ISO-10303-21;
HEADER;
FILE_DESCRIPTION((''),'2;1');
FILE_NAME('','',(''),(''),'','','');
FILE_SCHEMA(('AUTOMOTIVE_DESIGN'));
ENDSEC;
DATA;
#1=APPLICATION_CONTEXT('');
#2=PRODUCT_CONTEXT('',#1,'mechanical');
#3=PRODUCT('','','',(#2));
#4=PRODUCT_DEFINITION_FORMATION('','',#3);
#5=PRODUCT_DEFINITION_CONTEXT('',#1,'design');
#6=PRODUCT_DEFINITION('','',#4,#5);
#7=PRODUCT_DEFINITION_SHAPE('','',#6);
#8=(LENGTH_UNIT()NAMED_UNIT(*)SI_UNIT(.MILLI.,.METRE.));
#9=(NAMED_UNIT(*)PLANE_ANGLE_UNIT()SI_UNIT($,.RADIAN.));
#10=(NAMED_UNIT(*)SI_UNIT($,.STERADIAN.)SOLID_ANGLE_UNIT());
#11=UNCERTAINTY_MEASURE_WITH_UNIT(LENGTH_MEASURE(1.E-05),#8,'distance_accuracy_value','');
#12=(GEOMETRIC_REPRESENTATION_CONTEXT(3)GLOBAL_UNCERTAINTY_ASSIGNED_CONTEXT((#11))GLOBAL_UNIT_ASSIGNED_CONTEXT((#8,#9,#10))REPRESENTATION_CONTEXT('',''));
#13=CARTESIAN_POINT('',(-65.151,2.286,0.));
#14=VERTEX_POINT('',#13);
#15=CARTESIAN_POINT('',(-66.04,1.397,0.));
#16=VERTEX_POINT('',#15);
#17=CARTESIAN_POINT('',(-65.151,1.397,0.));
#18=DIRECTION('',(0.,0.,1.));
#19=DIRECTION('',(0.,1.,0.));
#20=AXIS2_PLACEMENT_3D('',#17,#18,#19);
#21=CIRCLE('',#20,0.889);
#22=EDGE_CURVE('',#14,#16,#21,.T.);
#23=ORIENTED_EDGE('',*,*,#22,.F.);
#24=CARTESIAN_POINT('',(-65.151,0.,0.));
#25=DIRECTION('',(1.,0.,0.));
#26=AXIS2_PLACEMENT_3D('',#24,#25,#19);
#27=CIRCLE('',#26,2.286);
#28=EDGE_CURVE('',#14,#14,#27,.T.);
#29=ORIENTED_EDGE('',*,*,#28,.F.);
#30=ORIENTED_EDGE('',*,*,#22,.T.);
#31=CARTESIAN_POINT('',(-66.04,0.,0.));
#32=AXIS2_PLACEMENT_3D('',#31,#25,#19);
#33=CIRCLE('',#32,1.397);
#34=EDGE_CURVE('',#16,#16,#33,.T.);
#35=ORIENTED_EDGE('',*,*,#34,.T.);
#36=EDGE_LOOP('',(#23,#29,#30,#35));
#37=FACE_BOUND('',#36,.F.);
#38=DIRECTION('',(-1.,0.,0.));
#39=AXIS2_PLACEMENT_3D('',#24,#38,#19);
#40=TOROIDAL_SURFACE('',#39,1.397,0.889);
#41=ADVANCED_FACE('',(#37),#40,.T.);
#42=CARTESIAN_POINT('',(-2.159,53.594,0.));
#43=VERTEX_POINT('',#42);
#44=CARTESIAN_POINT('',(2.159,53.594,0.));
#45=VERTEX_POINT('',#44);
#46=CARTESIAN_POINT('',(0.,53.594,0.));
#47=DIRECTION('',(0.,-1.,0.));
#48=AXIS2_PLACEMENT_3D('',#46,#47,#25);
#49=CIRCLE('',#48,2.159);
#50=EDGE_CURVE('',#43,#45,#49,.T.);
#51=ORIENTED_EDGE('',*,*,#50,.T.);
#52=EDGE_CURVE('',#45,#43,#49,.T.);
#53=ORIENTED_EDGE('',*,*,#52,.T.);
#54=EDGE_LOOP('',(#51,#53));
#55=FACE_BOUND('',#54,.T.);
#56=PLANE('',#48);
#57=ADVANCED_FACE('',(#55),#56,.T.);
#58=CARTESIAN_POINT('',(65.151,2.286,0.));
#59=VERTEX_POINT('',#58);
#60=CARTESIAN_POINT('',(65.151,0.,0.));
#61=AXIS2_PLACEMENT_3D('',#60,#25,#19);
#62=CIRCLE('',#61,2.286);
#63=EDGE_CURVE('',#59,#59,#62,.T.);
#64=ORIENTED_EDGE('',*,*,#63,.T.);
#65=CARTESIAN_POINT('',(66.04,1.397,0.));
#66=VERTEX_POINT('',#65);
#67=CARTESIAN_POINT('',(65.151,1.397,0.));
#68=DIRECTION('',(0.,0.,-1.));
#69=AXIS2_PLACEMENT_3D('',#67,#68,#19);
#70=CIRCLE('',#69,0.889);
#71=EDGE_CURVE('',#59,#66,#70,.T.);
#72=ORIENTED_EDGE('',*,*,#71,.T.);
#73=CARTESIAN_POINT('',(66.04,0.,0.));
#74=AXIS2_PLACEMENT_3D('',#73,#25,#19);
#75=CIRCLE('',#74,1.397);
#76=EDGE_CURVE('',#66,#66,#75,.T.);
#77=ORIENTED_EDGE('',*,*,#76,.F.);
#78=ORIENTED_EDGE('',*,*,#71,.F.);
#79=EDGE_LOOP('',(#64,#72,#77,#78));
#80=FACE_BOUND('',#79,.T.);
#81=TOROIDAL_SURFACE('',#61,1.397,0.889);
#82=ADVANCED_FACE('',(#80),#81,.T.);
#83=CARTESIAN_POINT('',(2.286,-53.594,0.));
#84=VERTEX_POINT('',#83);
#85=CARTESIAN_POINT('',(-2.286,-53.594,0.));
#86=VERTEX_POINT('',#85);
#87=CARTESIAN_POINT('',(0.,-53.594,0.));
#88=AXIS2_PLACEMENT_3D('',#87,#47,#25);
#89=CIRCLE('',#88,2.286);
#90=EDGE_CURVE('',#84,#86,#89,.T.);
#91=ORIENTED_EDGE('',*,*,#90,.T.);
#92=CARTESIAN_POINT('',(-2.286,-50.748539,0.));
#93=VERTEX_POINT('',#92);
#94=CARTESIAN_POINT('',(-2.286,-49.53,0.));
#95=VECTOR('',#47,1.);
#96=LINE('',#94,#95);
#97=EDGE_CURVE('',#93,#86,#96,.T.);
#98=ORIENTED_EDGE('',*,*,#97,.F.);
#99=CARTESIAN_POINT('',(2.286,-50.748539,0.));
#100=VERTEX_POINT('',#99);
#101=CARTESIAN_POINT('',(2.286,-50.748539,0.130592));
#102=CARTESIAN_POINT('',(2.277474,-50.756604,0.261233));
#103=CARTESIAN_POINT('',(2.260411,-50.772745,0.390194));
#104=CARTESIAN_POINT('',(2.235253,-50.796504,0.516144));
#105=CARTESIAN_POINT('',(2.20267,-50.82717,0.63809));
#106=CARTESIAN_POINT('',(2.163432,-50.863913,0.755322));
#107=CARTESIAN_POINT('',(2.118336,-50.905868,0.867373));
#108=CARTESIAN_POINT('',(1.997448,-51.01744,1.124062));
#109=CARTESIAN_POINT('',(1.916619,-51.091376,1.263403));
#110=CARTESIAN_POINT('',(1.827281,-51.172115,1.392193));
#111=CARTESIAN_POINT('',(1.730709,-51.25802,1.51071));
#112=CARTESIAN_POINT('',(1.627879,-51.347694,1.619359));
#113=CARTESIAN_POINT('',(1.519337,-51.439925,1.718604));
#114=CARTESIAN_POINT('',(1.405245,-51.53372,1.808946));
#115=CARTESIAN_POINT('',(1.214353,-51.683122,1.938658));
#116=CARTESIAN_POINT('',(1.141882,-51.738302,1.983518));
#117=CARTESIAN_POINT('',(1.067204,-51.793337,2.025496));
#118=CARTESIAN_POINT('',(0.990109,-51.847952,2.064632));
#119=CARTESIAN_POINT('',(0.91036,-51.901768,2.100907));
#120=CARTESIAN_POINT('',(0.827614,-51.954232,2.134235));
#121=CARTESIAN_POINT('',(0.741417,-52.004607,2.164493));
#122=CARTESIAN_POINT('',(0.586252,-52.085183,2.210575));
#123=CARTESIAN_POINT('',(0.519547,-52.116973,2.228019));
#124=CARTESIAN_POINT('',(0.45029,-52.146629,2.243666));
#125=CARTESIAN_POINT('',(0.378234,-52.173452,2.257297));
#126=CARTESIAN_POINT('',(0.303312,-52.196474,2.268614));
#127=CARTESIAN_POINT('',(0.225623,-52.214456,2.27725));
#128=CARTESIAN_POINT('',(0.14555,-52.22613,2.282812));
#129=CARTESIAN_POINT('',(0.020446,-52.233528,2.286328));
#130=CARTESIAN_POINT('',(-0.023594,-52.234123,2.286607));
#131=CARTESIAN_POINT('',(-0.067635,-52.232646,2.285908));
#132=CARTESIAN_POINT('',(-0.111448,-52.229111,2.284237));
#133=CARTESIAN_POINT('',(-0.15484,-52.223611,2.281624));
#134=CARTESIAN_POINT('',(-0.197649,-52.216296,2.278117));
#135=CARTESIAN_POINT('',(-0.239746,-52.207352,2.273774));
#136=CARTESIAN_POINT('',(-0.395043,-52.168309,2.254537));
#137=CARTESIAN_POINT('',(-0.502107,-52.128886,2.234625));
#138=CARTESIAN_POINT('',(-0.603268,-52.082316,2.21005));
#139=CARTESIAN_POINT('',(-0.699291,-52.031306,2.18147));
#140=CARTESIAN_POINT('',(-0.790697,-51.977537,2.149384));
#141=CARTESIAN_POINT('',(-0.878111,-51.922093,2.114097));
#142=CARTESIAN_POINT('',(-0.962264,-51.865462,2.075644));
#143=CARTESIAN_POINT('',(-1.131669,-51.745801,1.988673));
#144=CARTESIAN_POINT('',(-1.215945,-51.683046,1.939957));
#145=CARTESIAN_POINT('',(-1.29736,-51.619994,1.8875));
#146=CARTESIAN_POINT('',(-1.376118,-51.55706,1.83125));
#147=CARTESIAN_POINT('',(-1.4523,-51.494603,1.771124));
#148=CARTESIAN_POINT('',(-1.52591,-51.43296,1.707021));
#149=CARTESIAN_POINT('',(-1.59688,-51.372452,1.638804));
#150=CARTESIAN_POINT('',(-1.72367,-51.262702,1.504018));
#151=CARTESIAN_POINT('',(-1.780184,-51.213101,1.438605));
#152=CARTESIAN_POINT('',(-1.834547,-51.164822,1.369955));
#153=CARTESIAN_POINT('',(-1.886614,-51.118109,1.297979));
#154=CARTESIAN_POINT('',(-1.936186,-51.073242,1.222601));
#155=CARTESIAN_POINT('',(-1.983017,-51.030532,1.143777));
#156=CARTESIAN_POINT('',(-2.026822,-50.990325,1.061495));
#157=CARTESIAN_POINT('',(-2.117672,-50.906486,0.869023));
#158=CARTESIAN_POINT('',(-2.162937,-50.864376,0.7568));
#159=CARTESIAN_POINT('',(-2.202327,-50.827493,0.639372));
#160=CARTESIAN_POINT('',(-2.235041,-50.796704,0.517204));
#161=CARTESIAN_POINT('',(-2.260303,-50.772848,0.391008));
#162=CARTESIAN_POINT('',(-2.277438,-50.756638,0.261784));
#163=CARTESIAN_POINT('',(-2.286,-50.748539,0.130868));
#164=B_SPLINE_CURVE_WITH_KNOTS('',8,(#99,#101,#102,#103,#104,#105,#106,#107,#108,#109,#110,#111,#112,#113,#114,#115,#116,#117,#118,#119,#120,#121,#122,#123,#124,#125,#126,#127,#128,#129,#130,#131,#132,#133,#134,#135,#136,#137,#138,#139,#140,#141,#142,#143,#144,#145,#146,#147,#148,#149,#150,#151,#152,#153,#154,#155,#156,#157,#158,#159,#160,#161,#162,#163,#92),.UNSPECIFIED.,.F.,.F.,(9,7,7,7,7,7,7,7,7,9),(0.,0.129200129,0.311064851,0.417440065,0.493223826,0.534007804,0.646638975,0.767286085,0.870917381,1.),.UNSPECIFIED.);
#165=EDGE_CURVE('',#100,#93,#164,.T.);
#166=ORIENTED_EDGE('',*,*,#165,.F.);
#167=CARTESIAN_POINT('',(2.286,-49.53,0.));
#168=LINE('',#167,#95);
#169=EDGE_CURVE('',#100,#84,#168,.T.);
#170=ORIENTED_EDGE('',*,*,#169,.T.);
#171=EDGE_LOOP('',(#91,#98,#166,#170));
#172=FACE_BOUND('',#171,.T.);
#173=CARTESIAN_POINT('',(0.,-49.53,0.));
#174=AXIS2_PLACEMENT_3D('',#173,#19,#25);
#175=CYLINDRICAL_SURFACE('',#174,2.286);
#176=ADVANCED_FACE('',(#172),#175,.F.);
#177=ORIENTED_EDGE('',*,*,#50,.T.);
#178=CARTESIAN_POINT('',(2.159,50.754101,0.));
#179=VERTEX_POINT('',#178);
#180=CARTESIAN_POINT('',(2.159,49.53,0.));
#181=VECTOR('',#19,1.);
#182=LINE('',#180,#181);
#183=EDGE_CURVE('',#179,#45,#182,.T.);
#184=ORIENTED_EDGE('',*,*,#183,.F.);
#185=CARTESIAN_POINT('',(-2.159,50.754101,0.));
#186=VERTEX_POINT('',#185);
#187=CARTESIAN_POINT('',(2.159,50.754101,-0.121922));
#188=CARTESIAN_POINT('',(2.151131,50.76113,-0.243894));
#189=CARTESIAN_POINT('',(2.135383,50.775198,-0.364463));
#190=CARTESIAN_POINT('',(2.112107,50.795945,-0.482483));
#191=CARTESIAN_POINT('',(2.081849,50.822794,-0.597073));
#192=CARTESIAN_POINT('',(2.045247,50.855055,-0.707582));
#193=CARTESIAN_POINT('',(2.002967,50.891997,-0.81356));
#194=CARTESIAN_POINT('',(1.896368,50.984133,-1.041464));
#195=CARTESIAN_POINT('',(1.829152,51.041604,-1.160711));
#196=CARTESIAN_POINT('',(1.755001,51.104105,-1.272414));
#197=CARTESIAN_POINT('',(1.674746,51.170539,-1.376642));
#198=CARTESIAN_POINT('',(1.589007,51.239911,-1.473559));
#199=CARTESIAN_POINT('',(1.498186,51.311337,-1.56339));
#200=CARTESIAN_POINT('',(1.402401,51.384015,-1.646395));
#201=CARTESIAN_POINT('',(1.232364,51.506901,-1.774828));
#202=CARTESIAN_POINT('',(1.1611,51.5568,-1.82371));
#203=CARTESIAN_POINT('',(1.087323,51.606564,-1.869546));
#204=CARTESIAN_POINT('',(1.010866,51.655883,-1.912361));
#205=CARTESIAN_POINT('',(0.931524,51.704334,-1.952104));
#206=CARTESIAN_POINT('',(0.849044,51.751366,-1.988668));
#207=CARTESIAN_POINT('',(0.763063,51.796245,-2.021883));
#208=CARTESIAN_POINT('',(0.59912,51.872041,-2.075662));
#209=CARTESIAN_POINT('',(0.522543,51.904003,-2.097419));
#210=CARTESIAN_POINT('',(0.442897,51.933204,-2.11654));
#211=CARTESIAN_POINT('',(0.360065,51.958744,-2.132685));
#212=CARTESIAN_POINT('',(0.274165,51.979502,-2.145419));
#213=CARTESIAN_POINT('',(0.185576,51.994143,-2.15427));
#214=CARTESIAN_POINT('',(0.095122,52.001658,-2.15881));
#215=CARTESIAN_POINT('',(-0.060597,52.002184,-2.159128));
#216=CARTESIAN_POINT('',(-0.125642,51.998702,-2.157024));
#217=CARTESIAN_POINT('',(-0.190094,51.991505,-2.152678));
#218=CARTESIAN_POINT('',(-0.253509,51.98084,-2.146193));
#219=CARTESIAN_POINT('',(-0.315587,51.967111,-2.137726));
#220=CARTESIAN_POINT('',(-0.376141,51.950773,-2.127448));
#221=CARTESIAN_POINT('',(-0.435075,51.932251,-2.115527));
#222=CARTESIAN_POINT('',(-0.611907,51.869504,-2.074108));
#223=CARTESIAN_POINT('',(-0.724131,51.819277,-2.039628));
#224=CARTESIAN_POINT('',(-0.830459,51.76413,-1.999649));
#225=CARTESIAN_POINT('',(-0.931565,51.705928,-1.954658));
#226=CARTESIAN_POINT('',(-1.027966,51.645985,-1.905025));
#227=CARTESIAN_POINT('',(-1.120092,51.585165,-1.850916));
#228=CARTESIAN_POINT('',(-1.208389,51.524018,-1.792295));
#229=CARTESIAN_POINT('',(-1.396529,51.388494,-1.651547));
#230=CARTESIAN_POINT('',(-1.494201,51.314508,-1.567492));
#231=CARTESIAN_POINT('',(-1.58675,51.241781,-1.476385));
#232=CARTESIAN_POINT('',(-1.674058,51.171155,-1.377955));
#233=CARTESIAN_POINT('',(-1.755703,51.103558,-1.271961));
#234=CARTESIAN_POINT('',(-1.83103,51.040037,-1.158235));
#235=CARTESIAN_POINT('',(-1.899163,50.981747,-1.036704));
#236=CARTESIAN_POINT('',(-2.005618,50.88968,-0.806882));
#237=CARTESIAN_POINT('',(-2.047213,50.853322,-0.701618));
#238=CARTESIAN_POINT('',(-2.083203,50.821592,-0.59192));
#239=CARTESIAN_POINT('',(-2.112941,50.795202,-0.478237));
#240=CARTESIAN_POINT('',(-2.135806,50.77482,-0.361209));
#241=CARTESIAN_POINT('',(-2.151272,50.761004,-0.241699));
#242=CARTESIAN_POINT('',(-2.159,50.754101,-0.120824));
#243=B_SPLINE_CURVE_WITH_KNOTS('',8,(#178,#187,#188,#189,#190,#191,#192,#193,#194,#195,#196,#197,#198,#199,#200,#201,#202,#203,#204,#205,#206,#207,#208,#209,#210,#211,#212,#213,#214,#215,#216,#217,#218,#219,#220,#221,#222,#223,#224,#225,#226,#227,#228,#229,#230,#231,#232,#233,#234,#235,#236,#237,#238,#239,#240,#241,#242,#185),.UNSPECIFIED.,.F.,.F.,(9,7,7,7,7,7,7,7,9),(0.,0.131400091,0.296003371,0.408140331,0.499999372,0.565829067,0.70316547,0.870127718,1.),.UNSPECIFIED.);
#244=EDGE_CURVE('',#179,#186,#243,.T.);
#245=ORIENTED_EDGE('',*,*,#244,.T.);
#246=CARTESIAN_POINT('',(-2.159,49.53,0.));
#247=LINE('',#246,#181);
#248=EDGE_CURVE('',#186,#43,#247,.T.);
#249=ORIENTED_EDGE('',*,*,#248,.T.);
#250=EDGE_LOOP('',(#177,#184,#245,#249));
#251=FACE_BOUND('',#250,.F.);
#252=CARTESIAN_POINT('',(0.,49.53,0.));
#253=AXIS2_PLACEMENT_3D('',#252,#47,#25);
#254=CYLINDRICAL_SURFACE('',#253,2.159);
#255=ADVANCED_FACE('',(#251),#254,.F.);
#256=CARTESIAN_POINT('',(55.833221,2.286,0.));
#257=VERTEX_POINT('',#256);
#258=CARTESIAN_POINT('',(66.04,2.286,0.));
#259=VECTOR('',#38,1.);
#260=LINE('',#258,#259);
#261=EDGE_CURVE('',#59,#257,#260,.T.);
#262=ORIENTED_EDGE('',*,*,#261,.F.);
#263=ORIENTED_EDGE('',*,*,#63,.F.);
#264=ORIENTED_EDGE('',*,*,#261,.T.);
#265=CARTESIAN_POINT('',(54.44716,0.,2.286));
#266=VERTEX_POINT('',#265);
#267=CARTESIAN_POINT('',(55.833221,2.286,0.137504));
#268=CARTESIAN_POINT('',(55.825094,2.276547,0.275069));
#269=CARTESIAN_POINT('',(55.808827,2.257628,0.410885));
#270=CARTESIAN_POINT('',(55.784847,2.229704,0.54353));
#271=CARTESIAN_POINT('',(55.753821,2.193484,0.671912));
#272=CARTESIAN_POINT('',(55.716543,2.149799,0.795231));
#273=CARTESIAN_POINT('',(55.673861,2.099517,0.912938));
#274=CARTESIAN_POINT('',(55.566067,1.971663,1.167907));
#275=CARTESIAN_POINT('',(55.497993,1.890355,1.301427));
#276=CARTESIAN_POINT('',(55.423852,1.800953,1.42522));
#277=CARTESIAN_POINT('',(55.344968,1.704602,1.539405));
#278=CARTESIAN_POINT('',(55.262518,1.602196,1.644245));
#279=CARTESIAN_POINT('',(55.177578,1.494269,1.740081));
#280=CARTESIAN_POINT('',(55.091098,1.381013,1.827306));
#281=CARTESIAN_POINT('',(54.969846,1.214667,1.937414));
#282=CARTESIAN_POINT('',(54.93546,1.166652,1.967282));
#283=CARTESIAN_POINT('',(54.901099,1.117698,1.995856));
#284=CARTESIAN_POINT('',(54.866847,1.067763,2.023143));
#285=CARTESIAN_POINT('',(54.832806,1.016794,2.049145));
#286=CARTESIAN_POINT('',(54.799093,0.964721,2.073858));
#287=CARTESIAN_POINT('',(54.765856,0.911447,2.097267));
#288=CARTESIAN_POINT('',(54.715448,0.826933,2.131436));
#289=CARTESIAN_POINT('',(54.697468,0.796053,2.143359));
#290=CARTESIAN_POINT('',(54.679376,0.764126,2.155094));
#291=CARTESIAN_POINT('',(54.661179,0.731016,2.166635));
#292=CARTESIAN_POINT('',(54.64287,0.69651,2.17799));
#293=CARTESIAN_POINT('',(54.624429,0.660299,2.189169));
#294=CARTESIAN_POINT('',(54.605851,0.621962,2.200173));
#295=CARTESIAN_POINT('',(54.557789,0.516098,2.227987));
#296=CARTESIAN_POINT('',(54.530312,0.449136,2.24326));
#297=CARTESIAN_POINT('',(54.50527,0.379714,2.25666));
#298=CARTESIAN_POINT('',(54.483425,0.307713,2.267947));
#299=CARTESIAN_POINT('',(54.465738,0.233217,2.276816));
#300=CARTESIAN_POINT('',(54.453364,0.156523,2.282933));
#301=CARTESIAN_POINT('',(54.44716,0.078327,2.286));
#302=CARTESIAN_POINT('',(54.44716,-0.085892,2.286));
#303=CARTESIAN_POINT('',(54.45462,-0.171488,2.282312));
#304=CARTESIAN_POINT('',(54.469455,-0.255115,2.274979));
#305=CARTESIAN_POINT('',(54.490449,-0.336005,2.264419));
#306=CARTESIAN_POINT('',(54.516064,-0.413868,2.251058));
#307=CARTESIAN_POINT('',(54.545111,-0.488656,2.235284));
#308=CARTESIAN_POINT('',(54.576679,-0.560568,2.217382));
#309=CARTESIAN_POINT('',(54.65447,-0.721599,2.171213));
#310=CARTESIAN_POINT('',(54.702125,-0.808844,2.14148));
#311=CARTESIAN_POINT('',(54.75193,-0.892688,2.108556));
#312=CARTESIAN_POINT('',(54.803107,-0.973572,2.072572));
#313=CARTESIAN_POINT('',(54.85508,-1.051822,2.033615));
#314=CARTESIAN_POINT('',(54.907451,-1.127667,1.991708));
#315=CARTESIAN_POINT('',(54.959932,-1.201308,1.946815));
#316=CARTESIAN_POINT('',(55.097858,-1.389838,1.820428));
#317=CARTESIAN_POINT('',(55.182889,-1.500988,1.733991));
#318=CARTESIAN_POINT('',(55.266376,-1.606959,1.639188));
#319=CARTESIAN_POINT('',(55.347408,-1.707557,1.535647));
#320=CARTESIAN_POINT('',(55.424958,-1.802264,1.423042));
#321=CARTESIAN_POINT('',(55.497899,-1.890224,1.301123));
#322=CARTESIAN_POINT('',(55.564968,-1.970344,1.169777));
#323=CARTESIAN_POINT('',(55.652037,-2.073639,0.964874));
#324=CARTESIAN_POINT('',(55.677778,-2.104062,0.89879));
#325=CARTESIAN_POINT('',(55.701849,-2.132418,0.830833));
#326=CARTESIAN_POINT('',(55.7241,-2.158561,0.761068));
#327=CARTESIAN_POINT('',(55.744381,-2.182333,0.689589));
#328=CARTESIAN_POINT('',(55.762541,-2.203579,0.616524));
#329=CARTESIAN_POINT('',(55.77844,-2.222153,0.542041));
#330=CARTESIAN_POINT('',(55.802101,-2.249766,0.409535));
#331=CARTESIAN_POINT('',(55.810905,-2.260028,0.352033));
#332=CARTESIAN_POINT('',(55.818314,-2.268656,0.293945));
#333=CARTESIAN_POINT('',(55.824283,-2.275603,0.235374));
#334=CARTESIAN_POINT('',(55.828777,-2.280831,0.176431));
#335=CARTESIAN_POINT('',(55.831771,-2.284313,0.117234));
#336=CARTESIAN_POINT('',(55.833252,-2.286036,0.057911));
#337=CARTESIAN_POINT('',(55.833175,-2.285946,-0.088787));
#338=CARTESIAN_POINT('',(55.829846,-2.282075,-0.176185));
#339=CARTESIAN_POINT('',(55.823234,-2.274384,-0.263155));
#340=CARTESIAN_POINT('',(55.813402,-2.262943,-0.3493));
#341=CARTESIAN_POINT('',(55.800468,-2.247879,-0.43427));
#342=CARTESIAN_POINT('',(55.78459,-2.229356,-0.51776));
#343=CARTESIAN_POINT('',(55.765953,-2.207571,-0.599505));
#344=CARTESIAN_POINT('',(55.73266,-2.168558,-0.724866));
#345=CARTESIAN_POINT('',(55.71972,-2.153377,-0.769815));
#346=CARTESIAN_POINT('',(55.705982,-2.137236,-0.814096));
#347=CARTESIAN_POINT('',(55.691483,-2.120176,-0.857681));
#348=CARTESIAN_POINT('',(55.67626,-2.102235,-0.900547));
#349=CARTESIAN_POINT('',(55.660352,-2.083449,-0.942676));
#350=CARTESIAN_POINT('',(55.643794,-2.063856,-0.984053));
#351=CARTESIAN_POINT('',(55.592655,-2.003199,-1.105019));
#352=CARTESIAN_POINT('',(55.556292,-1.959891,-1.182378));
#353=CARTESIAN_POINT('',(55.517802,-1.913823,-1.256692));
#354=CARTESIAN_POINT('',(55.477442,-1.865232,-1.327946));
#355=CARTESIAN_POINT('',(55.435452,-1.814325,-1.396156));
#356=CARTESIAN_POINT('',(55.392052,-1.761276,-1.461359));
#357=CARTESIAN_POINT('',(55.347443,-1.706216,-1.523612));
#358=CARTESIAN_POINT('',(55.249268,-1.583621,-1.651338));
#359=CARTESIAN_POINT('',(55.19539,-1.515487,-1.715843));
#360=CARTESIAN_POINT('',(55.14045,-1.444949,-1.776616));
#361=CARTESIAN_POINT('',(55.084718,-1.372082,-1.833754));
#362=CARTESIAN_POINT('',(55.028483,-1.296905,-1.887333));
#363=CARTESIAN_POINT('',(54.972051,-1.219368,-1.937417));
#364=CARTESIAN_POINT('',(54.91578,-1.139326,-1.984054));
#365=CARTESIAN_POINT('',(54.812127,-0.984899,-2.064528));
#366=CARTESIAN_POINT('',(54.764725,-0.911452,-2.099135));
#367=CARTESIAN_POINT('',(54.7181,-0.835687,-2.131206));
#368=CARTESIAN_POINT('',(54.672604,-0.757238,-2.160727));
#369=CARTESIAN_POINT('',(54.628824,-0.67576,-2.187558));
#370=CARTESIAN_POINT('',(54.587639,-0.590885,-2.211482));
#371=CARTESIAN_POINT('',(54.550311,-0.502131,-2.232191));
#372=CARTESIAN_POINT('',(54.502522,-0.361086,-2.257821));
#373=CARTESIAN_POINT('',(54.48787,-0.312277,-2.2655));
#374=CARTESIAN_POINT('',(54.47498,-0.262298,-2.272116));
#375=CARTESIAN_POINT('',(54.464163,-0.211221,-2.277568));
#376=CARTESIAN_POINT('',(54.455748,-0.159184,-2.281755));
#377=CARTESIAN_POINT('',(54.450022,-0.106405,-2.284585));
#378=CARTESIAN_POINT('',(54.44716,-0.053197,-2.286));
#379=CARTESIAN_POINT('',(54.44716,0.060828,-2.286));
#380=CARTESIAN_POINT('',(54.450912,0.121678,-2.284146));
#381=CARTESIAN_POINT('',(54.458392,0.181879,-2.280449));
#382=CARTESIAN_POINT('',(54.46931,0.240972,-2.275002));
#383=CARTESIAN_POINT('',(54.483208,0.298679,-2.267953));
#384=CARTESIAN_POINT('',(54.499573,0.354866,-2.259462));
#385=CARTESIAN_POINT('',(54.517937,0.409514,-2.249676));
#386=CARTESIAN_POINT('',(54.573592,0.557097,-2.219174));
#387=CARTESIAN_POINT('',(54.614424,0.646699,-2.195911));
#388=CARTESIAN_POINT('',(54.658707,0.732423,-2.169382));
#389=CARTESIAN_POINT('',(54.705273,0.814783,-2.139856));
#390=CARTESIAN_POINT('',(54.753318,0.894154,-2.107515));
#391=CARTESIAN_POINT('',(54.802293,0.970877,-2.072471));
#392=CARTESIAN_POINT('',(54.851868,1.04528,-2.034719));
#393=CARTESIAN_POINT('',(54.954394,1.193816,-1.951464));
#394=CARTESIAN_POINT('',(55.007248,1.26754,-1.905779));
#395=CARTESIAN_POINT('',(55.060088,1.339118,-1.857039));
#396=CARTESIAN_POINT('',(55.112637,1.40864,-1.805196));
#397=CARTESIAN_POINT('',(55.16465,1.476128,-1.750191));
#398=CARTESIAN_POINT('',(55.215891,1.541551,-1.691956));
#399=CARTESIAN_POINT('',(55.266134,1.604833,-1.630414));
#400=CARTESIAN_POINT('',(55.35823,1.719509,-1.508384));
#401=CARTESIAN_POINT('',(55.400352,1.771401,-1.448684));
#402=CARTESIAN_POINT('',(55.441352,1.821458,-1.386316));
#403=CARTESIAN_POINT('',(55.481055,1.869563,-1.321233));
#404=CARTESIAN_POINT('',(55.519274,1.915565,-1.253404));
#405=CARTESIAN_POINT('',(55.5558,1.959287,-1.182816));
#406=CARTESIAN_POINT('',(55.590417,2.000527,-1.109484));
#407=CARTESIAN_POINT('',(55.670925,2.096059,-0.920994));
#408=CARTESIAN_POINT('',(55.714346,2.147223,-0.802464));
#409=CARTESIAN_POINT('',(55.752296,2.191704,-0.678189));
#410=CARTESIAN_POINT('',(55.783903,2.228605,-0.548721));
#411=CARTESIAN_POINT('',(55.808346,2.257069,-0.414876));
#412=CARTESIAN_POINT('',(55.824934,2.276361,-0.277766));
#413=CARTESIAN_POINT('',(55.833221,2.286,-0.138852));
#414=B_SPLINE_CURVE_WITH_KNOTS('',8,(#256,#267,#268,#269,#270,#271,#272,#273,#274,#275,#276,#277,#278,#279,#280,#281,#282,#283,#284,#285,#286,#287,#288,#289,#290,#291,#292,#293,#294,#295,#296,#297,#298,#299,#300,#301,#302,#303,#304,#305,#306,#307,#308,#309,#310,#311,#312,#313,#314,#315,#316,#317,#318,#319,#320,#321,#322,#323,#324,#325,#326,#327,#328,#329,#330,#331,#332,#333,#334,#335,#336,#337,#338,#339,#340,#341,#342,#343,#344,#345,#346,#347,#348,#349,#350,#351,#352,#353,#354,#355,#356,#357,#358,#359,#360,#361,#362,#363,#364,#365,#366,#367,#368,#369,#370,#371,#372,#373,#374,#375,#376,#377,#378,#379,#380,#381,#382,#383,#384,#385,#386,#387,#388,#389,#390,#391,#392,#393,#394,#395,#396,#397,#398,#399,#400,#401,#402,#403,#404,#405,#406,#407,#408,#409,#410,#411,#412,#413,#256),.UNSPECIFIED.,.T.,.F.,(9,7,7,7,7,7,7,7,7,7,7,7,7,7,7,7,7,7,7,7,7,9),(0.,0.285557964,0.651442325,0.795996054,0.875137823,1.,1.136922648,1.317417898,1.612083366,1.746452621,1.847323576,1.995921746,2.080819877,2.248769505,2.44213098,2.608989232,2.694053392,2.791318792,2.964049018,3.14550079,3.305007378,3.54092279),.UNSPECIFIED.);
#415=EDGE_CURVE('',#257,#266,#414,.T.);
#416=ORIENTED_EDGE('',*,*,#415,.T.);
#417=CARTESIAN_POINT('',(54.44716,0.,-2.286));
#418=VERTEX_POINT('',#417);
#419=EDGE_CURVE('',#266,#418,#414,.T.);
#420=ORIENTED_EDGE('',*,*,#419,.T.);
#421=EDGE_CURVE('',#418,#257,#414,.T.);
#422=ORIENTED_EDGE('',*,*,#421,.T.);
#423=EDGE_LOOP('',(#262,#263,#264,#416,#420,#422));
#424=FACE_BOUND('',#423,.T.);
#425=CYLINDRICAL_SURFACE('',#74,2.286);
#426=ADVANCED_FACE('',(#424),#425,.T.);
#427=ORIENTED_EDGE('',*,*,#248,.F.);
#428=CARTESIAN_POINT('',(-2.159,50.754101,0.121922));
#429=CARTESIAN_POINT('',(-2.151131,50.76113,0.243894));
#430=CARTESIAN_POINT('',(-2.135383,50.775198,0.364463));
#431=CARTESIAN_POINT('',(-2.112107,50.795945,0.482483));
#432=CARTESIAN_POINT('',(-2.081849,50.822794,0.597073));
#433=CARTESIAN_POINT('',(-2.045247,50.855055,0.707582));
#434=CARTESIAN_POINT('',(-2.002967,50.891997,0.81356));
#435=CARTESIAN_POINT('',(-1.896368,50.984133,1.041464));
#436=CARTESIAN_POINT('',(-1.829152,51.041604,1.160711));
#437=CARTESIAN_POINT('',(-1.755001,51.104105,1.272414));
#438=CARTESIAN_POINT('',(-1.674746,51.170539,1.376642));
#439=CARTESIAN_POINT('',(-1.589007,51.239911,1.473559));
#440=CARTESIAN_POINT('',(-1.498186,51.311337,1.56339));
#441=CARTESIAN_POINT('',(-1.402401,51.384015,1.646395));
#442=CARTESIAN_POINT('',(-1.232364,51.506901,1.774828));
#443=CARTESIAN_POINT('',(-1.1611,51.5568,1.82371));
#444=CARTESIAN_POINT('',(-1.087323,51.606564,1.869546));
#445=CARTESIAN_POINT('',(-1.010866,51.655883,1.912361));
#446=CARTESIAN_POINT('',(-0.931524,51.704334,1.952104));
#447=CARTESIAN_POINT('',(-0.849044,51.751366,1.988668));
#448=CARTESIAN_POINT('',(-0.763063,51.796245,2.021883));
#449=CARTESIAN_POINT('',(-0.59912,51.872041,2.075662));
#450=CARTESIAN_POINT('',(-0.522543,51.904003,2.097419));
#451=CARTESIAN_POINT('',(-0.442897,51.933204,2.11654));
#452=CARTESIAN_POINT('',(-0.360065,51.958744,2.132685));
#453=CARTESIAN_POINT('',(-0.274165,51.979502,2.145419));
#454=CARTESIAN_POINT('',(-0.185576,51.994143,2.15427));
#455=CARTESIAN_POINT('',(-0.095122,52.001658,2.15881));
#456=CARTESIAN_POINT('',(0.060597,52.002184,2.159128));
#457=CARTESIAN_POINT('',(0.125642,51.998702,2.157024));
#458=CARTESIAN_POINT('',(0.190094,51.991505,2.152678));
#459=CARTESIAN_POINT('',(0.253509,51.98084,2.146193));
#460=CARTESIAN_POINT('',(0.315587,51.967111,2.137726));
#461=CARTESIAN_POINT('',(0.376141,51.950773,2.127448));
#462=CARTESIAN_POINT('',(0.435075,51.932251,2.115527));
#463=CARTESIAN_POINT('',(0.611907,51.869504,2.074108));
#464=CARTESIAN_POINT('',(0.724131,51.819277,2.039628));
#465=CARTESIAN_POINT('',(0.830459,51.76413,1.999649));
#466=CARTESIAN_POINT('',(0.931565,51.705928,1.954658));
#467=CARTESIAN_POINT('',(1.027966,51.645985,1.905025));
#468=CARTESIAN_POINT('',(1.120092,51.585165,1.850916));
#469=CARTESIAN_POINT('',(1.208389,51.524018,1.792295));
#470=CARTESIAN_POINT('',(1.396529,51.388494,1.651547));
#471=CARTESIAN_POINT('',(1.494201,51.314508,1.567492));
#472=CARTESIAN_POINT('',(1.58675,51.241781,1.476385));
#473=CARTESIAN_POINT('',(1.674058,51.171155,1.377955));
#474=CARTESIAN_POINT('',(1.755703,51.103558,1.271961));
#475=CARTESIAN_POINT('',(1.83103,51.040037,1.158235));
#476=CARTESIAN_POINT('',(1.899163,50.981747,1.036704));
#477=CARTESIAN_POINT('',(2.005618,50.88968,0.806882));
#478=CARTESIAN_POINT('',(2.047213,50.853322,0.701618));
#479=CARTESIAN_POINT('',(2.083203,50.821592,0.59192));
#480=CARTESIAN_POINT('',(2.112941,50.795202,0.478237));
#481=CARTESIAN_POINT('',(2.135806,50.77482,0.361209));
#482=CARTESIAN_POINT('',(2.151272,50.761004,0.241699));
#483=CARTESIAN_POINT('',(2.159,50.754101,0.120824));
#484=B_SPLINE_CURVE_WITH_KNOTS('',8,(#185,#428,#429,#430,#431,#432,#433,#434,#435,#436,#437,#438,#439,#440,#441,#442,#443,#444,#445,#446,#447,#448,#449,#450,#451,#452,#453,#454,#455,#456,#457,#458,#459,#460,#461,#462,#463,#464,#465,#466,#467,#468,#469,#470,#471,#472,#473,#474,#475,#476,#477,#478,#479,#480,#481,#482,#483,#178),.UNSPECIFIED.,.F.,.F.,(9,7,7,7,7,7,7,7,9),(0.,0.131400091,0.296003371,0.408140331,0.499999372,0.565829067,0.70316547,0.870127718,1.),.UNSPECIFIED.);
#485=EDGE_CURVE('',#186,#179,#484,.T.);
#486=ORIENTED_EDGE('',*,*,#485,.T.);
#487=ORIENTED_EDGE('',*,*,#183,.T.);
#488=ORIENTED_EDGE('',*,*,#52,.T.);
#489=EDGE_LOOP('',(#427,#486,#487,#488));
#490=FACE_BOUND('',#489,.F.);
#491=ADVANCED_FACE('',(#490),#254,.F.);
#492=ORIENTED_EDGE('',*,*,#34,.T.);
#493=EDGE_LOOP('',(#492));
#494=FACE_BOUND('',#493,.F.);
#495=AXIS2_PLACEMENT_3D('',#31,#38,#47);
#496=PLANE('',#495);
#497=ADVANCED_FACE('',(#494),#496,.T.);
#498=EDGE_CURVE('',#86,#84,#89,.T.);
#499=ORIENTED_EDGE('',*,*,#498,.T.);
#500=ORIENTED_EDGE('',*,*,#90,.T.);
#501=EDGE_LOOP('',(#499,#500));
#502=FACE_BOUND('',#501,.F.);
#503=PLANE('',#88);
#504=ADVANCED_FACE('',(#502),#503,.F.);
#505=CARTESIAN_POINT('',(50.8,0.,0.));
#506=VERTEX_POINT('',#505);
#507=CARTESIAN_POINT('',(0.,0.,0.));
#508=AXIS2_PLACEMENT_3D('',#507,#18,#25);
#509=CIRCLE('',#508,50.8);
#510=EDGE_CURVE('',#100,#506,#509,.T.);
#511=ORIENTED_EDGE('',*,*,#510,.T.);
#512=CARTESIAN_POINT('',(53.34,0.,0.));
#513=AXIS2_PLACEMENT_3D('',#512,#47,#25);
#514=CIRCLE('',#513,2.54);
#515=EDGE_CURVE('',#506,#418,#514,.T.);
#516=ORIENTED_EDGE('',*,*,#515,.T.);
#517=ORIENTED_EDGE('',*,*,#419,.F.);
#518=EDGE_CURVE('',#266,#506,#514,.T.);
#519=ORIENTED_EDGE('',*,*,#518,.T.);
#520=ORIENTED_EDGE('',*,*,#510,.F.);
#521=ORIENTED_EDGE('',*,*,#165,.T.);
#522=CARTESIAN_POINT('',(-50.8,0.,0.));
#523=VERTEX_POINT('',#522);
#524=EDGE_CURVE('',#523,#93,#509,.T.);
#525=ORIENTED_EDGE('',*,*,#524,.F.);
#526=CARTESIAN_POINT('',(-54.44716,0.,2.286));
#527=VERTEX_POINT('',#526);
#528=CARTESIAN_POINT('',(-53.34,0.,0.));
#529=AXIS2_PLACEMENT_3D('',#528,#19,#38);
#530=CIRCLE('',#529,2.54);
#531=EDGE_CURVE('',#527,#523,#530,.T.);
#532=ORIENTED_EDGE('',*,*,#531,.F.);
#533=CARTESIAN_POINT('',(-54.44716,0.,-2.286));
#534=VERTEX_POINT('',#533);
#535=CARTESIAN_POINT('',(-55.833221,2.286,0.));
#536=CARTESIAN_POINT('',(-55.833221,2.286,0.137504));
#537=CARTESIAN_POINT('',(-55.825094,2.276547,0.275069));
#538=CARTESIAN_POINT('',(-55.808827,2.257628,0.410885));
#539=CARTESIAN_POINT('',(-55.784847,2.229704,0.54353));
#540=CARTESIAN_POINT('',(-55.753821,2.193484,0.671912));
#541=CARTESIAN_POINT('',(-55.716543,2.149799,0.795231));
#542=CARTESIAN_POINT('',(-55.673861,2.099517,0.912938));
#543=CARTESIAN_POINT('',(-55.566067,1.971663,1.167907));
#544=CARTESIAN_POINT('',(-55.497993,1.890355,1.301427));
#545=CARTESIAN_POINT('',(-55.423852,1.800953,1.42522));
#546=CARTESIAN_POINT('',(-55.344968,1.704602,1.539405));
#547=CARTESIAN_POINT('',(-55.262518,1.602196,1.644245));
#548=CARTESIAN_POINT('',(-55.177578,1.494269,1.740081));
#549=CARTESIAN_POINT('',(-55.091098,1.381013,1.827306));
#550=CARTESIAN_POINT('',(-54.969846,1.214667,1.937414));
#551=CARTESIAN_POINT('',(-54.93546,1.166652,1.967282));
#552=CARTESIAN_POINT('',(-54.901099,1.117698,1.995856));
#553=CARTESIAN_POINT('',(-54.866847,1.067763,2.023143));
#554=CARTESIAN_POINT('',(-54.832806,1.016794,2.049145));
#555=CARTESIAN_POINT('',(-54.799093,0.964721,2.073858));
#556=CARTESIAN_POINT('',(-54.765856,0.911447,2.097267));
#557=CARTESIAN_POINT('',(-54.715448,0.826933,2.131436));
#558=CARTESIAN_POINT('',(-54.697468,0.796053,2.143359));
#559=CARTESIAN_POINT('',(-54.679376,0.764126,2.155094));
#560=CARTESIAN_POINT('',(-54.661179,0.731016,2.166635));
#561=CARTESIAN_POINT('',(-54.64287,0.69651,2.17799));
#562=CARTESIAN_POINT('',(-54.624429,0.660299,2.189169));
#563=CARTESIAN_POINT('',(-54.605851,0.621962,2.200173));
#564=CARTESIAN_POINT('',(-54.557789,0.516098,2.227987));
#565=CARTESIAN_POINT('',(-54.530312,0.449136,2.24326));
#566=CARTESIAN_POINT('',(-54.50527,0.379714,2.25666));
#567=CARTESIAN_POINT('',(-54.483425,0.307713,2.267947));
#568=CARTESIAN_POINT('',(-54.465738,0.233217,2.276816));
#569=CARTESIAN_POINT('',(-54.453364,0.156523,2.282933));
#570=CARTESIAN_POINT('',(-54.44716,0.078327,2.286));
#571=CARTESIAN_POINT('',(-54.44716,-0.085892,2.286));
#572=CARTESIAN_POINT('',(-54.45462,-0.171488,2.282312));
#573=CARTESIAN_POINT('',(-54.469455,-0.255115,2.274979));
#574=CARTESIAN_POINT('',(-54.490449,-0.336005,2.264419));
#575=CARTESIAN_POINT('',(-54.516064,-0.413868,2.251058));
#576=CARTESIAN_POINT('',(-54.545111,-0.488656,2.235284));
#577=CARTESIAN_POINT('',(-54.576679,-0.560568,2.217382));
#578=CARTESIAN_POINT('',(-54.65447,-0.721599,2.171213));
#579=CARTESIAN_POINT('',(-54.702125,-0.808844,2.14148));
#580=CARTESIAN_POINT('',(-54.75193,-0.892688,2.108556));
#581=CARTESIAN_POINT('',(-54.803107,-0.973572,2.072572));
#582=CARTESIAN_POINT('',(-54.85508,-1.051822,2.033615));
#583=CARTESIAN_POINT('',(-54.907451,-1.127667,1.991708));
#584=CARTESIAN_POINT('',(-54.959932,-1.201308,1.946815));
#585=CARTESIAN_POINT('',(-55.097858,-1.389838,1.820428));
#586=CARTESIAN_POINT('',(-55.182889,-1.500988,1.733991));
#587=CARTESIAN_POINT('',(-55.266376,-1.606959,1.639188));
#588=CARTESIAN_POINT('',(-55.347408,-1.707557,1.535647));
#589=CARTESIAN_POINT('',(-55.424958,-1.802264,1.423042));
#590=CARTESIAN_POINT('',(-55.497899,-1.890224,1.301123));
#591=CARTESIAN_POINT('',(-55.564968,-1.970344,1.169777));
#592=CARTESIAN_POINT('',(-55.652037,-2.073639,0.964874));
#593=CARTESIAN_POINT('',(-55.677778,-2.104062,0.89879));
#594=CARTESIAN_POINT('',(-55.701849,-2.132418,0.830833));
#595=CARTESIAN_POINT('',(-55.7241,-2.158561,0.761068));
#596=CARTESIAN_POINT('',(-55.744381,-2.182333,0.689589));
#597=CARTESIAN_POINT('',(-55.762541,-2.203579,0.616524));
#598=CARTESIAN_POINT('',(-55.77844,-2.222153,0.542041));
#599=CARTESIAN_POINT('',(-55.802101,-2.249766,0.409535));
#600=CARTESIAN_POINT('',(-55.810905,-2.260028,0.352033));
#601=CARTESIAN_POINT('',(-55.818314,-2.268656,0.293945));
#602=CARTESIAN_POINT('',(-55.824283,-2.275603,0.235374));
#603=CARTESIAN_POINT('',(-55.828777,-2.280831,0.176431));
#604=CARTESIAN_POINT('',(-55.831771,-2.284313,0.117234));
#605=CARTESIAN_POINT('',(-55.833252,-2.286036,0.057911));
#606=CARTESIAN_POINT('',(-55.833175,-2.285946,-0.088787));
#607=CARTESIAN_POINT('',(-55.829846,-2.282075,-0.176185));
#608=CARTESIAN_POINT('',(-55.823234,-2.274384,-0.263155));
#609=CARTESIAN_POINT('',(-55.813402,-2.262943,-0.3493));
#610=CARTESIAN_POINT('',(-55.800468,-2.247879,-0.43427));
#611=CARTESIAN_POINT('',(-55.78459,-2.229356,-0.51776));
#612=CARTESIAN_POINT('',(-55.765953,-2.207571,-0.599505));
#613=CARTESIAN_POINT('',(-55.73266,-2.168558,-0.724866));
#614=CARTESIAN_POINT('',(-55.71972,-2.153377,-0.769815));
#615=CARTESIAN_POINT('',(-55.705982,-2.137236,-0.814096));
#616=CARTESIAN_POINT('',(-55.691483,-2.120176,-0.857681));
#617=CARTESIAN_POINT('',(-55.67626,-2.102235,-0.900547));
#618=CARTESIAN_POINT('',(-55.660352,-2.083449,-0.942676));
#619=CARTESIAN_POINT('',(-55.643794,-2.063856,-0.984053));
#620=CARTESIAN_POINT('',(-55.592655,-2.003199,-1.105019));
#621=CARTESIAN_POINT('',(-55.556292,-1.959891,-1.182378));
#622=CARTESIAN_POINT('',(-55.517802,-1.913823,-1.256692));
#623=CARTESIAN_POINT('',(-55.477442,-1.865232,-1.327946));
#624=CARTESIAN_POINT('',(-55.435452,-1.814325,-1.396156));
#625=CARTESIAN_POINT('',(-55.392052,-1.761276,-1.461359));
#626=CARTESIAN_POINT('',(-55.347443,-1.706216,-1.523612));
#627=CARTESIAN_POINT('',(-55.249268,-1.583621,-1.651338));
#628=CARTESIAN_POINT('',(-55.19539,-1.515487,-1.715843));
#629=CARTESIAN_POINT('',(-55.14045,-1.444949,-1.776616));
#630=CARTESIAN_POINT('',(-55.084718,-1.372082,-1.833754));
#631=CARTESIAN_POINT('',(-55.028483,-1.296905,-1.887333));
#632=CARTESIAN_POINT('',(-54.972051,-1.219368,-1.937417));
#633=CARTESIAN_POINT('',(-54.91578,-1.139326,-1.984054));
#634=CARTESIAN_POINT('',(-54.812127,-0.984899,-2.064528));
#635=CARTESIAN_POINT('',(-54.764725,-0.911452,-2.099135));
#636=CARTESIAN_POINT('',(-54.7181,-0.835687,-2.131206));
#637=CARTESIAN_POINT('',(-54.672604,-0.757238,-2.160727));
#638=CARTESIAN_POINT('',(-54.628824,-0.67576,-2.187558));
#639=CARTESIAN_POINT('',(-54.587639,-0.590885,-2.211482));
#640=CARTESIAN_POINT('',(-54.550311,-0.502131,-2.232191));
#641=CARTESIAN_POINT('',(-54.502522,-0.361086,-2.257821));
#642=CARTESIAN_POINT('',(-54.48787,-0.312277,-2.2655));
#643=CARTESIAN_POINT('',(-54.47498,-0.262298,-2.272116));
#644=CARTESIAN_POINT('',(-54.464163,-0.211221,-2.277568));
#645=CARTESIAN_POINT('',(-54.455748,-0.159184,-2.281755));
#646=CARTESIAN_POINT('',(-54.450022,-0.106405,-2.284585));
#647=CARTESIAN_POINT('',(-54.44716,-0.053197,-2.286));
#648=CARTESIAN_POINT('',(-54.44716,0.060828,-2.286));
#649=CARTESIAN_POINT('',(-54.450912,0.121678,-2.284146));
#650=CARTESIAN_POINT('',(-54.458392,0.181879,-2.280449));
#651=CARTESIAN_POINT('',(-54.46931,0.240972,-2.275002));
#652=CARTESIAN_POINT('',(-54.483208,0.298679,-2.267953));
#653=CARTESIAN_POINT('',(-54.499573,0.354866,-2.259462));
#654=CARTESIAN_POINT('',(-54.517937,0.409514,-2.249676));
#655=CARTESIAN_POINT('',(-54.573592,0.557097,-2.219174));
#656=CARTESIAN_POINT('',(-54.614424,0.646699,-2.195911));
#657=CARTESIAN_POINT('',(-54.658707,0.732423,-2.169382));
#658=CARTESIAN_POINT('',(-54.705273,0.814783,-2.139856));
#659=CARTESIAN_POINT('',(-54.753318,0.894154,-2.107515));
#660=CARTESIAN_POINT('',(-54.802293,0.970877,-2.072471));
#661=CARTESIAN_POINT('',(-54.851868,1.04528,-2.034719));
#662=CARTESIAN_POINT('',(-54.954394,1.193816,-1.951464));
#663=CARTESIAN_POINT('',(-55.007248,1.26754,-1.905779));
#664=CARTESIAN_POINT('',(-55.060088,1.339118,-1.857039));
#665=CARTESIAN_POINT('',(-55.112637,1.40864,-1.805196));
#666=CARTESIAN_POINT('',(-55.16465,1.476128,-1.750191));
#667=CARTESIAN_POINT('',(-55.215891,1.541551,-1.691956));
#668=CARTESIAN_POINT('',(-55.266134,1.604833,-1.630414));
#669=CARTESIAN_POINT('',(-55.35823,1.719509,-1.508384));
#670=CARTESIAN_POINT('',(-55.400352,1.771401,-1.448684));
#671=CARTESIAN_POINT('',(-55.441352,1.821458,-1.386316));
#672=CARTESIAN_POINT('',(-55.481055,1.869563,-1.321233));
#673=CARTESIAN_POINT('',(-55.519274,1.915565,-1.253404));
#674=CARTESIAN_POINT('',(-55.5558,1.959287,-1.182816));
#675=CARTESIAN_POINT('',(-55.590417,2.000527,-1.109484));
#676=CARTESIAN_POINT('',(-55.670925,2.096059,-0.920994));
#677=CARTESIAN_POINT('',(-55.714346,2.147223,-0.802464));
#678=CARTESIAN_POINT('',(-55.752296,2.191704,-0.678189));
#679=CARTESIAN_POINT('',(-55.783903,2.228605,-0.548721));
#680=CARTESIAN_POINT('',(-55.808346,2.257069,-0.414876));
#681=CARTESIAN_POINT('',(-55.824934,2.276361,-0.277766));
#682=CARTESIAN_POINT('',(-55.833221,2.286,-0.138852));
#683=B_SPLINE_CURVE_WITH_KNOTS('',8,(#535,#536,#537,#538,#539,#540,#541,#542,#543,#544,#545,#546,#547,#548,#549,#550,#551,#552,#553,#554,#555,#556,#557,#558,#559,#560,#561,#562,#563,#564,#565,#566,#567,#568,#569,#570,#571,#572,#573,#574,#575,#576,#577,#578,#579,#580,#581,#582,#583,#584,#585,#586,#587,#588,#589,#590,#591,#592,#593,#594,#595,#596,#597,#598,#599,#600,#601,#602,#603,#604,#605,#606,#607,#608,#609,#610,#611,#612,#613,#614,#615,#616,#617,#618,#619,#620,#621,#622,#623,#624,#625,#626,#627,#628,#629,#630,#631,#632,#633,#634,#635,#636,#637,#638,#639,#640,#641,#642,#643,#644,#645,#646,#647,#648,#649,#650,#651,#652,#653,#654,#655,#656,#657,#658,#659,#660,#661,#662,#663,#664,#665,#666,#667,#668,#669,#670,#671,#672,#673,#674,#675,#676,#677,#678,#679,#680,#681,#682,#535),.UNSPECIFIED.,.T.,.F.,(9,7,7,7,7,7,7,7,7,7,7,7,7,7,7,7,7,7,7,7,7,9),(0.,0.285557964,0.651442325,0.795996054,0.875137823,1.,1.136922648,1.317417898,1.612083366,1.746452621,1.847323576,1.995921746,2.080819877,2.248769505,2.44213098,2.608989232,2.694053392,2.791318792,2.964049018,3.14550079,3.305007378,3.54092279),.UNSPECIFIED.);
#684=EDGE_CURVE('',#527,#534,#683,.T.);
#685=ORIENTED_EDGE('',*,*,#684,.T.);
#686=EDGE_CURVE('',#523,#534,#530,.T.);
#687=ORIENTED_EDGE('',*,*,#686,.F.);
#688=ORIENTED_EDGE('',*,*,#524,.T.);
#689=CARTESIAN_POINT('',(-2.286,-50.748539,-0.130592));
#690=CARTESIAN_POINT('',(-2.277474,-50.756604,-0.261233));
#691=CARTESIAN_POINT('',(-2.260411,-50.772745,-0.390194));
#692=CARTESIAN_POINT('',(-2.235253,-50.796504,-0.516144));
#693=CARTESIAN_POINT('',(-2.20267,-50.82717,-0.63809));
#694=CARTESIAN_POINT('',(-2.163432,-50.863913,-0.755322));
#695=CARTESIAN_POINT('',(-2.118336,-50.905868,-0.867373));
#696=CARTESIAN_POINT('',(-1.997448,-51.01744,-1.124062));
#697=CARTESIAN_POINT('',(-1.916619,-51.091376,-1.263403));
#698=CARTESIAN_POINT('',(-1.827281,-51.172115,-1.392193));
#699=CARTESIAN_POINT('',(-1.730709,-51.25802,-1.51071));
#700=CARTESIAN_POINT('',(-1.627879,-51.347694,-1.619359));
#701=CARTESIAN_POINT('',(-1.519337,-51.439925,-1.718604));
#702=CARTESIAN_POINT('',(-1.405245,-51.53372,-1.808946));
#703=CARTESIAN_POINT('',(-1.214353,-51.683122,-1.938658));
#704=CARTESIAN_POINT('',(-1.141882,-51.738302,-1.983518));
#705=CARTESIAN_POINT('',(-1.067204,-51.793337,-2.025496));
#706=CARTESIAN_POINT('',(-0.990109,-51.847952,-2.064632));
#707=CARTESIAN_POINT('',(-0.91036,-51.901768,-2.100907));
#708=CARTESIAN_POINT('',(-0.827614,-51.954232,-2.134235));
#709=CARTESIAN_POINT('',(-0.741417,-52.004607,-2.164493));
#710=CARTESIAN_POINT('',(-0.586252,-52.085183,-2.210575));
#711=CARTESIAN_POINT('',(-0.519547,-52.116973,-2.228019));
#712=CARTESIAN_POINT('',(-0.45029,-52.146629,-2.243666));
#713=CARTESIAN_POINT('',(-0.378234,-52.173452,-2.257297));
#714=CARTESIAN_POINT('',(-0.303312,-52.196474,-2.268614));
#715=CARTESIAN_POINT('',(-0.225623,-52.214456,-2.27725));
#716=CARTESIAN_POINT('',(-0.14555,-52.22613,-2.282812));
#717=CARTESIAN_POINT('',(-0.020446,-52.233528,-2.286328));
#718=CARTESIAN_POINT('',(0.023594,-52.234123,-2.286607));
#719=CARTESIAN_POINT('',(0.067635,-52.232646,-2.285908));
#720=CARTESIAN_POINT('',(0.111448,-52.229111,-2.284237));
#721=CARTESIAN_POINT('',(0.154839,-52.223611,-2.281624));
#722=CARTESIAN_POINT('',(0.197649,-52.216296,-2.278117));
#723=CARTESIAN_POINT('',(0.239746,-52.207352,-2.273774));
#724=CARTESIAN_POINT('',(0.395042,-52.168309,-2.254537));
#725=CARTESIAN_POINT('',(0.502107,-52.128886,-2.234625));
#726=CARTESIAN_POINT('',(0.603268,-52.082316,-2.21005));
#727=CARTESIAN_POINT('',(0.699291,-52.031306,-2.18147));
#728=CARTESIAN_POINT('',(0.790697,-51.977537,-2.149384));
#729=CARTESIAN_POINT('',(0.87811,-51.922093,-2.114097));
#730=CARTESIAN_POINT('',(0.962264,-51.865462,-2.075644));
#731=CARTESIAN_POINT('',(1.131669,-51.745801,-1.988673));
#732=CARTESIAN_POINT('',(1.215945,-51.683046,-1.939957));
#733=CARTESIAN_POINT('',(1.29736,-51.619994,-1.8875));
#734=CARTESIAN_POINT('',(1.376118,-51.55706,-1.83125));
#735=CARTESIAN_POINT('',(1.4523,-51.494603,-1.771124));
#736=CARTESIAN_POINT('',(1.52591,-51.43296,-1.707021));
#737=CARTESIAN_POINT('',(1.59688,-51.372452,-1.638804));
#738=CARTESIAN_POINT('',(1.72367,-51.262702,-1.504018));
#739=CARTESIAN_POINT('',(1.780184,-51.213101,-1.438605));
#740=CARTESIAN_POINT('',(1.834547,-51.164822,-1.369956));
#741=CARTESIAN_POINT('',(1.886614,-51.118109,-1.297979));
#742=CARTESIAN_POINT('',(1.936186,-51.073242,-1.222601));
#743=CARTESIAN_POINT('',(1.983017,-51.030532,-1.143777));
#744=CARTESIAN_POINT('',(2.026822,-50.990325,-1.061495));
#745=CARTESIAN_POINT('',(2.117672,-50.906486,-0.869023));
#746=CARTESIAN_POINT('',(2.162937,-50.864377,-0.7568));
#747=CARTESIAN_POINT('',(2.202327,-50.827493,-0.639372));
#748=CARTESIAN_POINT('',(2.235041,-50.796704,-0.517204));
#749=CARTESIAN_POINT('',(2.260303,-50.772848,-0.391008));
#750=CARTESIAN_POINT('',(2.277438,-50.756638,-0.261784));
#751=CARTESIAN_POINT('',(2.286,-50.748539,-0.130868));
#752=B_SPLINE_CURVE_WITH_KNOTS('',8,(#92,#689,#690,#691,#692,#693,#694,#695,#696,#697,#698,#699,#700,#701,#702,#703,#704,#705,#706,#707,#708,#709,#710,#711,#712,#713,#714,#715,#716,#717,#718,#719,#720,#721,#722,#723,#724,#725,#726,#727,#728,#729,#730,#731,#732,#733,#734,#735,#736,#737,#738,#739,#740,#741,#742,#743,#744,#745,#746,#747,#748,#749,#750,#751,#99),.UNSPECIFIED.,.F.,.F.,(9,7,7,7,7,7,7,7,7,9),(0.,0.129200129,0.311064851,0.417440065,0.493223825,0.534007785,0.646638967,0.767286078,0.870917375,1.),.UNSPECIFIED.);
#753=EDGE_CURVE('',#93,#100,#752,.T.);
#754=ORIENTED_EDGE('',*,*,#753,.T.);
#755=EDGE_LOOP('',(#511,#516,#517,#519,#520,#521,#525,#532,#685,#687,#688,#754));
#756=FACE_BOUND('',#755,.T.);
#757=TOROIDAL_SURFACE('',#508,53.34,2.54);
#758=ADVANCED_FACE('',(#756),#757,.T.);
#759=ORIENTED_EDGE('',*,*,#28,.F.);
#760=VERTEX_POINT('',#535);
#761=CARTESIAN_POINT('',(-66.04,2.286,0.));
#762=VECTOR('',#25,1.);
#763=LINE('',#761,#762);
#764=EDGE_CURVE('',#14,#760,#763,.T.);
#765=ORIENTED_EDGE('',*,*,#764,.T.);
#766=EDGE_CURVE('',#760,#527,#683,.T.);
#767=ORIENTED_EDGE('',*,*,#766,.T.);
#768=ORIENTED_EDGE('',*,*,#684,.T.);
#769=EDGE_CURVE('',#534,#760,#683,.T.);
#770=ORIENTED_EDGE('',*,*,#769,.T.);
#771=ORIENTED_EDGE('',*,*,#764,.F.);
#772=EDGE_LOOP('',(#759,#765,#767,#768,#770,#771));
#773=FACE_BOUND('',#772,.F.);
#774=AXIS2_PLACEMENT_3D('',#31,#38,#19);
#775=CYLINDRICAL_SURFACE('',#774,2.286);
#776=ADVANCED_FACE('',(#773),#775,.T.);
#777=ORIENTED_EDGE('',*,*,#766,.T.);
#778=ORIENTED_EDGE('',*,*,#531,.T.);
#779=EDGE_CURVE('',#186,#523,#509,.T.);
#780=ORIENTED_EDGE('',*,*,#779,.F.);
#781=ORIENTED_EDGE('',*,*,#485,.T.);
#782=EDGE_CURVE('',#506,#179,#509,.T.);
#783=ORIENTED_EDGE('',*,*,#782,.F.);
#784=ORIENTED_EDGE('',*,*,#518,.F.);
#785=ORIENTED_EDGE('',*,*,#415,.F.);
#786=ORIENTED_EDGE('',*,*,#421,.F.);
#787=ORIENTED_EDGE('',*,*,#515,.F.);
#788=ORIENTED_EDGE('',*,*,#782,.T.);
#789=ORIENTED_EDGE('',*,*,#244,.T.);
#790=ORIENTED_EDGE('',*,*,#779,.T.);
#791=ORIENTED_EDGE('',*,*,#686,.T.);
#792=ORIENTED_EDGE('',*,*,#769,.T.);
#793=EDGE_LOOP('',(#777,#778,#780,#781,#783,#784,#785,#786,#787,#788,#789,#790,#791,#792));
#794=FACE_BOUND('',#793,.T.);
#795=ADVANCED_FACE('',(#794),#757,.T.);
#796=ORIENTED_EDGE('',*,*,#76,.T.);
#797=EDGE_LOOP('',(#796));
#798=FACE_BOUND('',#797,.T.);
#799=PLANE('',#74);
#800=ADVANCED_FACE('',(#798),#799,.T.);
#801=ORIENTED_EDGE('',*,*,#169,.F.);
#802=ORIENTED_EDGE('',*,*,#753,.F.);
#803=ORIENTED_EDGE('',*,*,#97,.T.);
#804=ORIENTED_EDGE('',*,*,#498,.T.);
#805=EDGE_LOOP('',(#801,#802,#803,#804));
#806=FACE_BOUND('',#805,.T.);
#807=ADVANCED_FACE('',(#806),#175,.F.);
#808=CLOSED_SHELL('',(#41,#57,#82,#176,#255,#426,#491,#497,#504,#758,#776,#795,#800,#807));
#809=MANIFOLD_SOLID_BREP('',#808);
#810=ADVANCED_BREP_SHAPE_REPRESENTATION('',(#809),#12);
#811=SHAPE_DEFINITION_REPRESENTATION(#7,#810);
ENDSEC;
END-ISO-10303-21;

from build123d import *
from build123d import SkipClean  # not in build123d's __all__

# Parameters (mm, degrees)
F1_R     = 2.54
F4_R     = 2.159
F5_DEPTH = 4.064
F7_R     = 2.286
F8_DEPTH = 4.064
F10_R    = 2.286
F12_R    = 0.889


with BuildPart() as f2:
    # F2: sweep along a path in F0
    with BuildLine(Plane.XY) as f2_path:
        CenterArc((0, 0), 53.34, 0, 360)
    # F1 (on Right) → F2 (sweep)
    with BuildSketch(Plane.YZ):
        with Locations((-53.34, 0)):
            Circle(F1_R)
    sweep(path=f2_path.line)

    # F4 (on offset) → F5 (cut)
    with BuildSketch(Plane.XZ.offset(-49.53)):
        Circle(F4_R)
    extrude(amount=-F5_DEPTH, mode=Mode.SUBTRACT)

    # F7 (on offset) → F8 (cut)
    with BuildSketch(Plane.XZ.offset(49.53)):
        Circle(F7_R)
    extrude(amount=F8_DEPTH, mode=Mode.SUBTRACT)

    # F10 (on offset) → F11 (join, up to the next surface of F2)
    with BuildSketch(Plane.YZ.offset(66.04)):
        Circle(F10_R)
    extrude(until=Until.NEXT, dir=(-1, 0, 0))

    # F12
    f12_edges = [f2.edges().sort_by_distance(p)[0] for p in [
        (66.04, -2.286, 0),
    ]]
    fillet(f12_edges, radius=F12_R)

    # F13: F2 across plane


with BuildPart() as f2_1:
    add(f2.part, clean=False)
    with SkipClean():  # cleaning this boolean's faces spoils the solid; the shape is the same uncleaned
        add(f2.part.mirror(Plane.YZ), clean=False)


solid = f2_1.part
